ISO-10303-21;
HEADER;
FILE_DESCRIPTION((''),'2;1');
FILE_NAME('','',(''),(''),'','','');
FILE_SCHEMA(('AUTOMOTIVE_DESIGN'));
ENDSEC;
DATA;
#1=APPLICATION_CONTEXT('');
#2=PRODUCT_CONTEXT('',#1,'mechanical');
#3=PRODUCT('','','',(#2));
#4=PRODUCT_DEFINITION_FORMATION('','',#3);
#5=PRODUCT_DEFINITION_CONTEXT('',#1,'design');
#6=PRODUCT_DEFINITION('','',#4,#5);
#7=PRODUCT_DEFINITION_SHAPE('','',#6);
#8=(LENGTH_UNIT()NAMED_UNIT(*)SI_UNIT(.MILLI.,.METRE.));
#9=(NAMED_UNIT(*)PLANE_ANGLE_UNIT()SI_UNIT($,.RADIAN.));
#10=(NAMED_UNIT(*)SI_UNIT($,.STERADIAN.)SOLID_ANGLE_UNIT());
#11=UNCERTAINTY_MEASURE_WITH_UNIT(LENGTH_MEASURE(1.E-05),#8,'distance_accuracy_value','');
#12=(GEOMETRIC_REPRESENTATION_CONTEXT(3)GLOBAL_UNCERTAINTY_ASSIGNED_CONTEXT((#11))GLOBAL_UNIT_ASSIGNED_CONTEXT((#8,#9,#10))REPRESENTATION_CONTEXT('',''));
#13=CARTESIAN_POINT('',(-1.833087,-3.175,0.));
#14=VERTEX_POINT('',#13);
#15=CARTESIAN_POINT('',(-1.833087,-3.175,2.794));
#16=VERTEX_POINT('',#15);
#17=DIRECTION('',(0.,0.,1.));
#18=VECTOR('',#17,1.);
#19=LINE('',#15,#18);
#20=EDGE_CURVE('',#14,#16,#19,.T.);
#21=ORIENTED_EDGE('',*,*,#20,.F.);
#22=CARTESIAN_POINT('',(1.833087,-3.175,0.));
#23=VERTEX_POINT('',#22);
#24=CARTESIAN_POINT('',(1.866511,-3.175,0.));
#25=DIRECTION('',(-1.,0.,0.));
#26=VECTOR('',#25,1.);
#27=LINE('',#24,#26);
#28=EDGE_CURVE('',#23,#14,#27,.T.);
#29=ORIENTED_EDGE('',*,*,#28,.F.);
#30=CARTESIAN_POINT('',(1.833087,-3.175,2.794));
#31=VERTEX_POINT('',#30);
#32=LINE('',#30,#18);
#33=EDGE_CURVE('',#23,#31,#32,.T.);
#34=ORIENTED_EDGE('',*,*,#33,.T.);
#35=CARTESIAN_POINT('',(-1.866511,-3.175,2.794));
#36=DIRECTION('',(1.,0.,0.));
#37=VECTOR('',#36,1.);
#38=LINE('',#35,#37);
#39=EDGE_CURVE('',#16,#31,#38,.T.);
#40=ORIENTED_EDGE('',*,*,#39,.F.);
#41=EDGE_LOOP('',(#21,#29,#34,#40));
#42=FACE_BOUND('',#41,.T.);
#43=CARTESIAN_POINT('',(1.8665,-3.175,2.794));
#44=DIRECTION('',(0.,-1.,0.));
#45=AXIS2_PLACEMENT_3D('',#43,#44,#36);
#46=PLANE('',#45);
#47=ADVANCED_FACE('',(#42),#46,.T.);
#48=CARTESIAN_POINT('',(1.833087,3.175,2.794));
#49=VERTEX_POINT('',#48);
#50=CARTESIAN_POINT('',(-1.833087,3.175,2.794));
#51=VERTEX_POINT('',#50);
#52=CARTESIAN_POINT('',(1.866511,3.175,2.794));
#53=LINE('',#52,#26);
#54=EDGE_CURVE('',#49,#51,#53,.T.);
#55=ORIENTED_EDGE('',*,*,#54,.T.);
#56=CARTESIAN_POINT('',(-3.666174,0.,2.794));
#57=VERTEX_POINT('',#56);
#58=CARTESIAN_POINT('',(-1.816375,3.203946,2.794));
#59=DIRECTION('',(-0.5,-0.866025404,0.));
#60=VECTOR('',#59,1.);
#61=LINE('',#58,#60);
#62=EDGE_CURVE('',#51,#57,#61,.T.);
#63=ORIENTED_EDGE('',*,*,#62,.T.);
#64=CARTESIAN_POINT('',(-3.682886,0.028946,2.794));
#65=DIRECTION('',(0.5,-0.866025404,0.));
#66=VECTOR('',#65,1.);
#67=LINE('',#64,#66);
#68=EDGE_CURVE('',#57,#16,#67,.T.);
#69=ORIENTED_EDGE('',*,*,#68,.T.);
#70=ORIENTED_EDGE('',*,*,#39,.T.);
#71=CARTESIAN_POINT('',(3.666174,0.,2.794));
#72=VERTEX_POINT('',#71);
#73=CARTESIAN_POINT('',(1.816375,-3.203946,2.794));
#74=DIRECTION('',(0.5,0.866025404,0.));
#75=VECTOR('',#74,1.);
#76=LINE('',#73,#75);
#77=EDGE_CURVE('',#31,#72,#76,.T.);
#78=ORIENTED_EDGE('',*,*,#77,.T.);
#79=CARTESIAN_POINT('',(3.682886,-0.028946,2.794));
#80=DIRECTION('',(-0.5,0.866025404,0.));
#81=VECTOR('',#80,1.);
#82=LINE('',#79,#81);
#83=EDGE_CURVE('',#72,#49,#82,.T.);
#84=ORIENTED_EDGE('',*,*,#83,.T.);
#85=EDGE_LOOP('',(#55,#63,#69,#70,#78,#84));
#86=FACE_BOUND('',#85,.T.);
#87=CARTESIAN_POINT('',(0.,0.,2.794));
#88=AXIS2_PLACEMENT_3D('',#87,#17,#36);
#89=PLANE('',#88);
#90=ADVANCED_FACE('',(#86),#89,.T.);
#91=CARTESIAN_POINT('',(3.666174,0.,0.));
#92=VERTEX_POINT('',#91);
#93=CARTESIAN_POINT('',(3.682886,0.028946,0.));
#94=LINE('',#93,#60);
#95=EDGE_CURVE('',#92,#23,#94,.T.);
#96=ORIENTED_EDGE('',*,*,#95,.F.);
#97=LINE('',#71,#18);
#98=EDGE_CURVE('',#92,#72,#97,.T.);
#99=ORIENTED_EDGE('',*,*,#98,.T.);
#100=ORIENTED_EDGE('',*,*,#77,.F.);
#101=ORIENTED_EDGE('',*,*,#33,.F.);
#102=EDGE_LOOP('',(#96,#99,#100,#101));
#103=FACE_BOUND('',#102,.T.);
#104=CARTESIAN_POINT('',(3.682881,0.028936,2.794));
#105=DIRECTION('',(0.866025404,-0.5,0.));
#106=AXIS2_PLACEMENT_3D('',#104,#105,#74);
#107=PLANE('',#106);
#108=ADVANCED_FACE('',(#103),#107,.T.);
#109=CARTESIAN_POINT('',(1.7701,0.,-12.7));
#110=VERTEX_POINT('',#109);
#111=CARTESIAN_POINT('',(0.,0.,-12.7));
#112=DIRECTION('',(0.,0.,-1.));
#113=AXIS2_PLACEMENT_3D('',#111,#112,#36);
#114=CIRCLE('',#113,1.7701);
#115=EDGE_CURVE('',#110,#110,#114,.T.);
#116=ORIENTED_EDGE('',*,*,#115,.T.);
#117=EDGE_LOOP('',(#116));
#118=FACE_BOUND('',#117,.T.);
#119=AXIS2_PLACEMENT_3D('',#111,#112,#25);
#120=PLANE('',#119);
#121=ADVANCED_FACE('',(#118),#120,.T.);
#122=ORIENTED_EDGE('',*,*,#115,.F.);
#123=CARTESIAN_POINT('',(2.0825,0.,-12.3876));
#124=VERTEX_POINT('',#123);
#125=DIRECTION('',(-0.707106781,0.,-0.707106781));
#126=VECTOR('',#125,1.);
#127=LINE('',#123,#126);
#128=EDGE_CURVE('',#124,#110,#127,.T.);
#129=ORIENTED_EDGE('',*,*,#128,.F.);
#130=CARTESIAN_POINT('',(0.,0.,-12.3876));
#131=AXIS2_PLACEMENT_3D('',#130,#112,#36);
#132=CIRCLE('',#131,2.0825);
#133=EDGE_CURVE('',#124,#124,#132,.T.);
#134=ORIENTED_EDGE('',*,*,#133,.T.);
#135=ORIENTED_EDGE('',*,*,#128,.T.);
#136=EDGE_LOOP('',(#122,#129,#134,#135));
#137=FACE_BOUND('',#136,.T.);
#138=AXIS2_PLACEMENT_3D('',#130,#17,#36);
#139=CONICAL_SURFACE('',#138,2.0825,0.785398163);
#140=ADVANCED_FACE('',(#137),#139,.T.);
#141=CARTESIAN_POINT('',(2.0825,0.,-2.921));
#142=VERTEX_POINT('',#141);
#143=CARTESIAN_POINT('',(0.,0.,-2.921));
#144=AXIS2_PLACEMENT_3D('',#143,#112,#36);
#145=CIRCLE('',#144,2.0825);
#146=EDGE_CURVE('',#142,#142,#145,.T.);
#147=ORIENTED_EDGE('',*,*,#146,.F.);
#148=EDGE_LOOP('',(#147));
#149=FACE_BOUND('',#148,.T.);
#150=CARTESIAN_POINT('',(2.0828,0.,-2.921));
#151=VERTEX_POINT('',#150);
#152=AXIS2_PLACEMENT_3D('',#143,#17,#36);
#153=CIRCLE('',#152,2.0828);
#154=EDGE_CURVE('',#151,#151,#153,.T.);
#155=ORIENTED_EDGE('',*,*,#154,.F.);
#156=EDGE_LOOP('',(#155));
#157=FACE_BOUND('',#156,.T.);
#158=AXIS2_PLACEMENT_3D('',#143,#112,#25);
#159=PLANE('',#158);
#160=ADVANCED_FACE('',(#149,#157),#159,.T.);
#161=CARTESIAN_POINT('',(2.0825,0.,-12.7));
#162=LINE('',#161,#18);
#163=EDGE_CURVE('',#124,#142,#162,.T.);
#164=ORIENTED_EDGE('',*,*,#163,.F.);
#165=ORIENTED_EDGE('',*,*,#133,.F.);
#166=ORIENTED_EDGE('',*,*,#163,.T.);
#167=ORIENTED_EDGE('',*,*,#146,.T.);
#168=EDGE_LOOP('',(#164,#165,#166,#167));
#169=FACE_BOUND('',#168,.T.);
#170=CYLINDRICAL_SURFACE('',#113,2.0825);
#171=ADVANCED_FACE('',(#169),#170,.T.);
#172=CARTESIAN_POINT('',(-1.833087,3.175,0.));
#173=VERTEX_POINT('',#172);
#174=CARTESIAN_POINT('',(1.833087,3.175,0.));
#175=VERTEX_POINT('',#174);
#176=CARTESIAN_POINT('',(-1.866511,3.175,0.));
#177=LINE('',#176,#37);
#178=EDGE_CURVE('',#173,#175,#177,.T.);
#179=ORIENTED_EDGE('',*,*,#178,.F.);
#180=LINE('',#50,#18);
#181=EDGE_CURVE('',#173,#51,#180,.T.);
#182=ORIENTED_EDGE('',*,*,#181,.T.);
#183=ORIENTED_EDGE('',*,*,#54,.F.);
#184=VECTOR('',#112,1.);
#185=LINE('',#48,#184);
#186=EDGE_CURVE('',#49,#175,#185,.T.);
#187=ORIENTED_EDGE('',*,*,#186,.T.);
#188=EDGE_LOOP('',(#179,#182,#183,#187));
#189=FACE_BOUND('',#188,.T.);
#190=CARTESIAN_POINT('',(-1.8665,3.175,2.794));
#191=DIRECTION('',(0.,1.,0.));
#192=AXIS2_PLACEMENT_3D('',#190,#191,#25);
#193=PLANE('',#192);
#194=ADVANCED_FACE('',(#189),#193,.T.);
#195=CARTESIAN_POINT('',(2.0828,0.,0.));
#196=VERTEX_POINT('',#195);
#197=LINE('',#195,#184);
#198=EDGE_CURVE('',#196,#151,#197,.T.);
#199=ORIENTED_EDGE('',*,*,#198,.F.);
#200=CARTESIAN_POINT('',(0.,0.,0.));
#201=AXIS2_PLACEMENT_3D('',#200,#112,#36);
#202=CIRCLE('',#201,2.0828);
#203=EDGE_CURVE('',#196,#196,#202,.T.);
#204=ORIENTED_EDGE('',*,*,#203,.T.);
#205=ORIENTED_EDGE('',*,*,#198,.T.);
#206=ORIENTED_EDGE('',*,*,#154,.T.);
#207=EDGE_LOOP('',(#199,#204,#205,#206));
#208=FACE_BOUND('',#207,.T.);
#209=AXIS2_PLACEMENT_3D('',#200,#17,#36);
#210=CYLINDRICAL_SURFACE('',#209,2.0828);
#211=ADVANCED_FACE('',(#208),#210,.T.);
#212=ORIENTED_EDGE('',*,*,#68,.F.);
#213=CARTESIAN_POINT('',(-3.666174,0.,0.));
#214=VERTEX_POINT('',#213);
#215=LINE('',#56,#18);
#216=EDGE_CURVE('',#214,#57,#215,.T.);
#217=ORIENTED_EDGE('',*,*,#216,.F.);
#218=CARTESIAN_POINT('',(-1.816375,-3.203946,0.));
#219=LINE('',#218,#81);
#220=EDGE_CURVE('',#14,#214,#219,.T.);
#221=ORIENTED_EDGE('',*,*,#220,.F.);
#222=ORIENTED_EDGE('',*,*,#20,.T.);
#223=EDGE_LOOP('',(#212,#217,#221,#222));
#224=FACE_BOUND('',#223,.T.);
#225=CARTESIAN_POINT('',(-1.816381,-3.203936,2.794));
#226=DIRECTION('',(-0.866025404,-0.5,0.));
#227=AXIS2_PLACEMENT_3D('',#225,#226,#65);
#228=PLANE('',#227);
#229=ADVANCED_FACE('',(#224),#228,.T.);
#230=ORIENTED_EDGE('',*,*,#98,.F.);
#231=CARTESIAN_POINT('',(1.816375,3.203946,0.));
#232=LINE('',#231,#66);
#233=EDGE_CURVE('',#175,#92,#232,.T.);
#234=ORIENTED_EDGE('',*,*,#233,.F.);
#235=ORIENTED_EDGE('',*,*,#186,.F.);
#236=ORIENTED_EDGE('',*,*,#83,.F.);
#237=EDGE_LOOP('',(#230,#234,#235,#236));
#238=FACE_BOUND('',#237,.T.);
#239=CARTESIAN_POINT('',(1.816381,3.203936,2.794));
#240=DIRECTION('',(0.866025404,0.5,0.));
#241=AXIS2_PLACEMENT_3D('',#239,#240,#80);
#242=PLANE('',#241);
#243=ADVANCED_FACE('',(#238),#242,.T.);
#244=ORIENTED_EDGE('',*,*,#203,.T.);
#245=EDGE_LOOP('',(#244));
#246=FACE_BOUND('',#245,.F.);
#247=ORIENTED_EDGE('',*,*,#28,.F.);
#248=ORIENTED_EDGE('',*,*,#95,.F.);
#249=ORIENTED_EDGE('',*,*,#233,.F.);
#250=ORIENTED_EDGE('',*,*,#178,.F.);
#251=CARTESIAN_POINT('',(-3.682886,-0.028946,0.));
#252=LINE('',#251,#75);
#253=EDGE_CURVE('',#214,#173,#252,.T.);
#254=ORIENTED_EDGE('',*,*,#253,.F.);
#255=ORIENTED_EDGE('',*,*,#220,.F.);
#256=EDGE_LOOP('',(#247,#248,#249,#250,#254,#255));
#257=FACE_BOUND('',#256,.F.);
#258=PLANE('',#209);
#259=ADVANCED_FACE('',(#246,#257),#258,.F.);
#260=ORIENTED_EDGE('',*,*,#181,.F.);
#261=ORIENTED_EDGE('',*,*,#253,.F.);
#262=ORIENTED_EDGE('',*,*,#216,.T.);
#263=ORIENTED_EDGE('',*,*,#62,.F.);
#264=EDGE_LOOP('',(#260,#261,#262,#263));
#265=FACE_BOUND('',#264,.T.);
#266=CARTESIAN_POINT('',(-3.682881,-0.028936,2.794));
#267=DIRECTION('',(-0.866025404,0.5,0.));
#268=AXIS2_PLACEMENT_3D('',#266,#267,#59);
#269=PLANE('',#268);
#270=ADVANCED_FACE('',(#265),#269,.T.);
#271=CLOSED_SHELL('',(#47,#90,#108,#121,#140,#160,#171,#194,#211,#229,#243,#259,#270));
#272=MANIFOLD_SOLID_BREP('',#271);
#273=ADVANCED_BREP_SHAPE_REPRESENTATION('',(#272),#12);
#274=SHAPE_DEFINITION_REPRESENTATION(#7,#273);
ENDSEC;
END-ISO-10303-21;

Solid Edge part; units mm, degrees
sketch "Sketch1" plane through (0, 0, 0) normal (0, 0, 1) x (1, 0, 0)
  circle A0 centre (0, 0) radius 3.683
  dimension "D1" = 7.366
extrude "Protrusion1" add sketch "Sketch1" along normal blind 2.794
sketch "Sketch2" plane through (0, 0, 0) normal (0, 0, -1) x (1, 0, 0)
  circle A0 centre (0, 0) radius 2.0828
extrude "Protrusion2" add sketch "Sketch2" along normal blind 12.7
sketch "Sketch3" plane through (0, 0, -12.7) normal (0, 0, -1) x (1, 0, 0)
  circle A0 centre (0, 0) radius 2.0825
extrude "Cutout1" cut sketch "Sketch3" against normal blind 9.779 flip side to cut
chamfer "Chamfer_1" distance 0.3124 angle 45 1 edges at (-2.0825, 0, -12.7)
sketch "Sketch4" plane through (0, 0, 2.794) normal (0, 0, 1) x (1, 0, 0)
  line L0 (-1.8665, 3.175) -> (1.8665, 3.175)
  dimension "D1" = 6.35
extrude "Cutout2" cut sketch "Sketch4" against normal up to next material side at (0, 3.225, 2.794)
pattern_circular "Pattern1" count 6 over 360 about axis through (0, 0, 2.794) along (0, 0, 1) of "Cutout2"
properties part number "119800"
